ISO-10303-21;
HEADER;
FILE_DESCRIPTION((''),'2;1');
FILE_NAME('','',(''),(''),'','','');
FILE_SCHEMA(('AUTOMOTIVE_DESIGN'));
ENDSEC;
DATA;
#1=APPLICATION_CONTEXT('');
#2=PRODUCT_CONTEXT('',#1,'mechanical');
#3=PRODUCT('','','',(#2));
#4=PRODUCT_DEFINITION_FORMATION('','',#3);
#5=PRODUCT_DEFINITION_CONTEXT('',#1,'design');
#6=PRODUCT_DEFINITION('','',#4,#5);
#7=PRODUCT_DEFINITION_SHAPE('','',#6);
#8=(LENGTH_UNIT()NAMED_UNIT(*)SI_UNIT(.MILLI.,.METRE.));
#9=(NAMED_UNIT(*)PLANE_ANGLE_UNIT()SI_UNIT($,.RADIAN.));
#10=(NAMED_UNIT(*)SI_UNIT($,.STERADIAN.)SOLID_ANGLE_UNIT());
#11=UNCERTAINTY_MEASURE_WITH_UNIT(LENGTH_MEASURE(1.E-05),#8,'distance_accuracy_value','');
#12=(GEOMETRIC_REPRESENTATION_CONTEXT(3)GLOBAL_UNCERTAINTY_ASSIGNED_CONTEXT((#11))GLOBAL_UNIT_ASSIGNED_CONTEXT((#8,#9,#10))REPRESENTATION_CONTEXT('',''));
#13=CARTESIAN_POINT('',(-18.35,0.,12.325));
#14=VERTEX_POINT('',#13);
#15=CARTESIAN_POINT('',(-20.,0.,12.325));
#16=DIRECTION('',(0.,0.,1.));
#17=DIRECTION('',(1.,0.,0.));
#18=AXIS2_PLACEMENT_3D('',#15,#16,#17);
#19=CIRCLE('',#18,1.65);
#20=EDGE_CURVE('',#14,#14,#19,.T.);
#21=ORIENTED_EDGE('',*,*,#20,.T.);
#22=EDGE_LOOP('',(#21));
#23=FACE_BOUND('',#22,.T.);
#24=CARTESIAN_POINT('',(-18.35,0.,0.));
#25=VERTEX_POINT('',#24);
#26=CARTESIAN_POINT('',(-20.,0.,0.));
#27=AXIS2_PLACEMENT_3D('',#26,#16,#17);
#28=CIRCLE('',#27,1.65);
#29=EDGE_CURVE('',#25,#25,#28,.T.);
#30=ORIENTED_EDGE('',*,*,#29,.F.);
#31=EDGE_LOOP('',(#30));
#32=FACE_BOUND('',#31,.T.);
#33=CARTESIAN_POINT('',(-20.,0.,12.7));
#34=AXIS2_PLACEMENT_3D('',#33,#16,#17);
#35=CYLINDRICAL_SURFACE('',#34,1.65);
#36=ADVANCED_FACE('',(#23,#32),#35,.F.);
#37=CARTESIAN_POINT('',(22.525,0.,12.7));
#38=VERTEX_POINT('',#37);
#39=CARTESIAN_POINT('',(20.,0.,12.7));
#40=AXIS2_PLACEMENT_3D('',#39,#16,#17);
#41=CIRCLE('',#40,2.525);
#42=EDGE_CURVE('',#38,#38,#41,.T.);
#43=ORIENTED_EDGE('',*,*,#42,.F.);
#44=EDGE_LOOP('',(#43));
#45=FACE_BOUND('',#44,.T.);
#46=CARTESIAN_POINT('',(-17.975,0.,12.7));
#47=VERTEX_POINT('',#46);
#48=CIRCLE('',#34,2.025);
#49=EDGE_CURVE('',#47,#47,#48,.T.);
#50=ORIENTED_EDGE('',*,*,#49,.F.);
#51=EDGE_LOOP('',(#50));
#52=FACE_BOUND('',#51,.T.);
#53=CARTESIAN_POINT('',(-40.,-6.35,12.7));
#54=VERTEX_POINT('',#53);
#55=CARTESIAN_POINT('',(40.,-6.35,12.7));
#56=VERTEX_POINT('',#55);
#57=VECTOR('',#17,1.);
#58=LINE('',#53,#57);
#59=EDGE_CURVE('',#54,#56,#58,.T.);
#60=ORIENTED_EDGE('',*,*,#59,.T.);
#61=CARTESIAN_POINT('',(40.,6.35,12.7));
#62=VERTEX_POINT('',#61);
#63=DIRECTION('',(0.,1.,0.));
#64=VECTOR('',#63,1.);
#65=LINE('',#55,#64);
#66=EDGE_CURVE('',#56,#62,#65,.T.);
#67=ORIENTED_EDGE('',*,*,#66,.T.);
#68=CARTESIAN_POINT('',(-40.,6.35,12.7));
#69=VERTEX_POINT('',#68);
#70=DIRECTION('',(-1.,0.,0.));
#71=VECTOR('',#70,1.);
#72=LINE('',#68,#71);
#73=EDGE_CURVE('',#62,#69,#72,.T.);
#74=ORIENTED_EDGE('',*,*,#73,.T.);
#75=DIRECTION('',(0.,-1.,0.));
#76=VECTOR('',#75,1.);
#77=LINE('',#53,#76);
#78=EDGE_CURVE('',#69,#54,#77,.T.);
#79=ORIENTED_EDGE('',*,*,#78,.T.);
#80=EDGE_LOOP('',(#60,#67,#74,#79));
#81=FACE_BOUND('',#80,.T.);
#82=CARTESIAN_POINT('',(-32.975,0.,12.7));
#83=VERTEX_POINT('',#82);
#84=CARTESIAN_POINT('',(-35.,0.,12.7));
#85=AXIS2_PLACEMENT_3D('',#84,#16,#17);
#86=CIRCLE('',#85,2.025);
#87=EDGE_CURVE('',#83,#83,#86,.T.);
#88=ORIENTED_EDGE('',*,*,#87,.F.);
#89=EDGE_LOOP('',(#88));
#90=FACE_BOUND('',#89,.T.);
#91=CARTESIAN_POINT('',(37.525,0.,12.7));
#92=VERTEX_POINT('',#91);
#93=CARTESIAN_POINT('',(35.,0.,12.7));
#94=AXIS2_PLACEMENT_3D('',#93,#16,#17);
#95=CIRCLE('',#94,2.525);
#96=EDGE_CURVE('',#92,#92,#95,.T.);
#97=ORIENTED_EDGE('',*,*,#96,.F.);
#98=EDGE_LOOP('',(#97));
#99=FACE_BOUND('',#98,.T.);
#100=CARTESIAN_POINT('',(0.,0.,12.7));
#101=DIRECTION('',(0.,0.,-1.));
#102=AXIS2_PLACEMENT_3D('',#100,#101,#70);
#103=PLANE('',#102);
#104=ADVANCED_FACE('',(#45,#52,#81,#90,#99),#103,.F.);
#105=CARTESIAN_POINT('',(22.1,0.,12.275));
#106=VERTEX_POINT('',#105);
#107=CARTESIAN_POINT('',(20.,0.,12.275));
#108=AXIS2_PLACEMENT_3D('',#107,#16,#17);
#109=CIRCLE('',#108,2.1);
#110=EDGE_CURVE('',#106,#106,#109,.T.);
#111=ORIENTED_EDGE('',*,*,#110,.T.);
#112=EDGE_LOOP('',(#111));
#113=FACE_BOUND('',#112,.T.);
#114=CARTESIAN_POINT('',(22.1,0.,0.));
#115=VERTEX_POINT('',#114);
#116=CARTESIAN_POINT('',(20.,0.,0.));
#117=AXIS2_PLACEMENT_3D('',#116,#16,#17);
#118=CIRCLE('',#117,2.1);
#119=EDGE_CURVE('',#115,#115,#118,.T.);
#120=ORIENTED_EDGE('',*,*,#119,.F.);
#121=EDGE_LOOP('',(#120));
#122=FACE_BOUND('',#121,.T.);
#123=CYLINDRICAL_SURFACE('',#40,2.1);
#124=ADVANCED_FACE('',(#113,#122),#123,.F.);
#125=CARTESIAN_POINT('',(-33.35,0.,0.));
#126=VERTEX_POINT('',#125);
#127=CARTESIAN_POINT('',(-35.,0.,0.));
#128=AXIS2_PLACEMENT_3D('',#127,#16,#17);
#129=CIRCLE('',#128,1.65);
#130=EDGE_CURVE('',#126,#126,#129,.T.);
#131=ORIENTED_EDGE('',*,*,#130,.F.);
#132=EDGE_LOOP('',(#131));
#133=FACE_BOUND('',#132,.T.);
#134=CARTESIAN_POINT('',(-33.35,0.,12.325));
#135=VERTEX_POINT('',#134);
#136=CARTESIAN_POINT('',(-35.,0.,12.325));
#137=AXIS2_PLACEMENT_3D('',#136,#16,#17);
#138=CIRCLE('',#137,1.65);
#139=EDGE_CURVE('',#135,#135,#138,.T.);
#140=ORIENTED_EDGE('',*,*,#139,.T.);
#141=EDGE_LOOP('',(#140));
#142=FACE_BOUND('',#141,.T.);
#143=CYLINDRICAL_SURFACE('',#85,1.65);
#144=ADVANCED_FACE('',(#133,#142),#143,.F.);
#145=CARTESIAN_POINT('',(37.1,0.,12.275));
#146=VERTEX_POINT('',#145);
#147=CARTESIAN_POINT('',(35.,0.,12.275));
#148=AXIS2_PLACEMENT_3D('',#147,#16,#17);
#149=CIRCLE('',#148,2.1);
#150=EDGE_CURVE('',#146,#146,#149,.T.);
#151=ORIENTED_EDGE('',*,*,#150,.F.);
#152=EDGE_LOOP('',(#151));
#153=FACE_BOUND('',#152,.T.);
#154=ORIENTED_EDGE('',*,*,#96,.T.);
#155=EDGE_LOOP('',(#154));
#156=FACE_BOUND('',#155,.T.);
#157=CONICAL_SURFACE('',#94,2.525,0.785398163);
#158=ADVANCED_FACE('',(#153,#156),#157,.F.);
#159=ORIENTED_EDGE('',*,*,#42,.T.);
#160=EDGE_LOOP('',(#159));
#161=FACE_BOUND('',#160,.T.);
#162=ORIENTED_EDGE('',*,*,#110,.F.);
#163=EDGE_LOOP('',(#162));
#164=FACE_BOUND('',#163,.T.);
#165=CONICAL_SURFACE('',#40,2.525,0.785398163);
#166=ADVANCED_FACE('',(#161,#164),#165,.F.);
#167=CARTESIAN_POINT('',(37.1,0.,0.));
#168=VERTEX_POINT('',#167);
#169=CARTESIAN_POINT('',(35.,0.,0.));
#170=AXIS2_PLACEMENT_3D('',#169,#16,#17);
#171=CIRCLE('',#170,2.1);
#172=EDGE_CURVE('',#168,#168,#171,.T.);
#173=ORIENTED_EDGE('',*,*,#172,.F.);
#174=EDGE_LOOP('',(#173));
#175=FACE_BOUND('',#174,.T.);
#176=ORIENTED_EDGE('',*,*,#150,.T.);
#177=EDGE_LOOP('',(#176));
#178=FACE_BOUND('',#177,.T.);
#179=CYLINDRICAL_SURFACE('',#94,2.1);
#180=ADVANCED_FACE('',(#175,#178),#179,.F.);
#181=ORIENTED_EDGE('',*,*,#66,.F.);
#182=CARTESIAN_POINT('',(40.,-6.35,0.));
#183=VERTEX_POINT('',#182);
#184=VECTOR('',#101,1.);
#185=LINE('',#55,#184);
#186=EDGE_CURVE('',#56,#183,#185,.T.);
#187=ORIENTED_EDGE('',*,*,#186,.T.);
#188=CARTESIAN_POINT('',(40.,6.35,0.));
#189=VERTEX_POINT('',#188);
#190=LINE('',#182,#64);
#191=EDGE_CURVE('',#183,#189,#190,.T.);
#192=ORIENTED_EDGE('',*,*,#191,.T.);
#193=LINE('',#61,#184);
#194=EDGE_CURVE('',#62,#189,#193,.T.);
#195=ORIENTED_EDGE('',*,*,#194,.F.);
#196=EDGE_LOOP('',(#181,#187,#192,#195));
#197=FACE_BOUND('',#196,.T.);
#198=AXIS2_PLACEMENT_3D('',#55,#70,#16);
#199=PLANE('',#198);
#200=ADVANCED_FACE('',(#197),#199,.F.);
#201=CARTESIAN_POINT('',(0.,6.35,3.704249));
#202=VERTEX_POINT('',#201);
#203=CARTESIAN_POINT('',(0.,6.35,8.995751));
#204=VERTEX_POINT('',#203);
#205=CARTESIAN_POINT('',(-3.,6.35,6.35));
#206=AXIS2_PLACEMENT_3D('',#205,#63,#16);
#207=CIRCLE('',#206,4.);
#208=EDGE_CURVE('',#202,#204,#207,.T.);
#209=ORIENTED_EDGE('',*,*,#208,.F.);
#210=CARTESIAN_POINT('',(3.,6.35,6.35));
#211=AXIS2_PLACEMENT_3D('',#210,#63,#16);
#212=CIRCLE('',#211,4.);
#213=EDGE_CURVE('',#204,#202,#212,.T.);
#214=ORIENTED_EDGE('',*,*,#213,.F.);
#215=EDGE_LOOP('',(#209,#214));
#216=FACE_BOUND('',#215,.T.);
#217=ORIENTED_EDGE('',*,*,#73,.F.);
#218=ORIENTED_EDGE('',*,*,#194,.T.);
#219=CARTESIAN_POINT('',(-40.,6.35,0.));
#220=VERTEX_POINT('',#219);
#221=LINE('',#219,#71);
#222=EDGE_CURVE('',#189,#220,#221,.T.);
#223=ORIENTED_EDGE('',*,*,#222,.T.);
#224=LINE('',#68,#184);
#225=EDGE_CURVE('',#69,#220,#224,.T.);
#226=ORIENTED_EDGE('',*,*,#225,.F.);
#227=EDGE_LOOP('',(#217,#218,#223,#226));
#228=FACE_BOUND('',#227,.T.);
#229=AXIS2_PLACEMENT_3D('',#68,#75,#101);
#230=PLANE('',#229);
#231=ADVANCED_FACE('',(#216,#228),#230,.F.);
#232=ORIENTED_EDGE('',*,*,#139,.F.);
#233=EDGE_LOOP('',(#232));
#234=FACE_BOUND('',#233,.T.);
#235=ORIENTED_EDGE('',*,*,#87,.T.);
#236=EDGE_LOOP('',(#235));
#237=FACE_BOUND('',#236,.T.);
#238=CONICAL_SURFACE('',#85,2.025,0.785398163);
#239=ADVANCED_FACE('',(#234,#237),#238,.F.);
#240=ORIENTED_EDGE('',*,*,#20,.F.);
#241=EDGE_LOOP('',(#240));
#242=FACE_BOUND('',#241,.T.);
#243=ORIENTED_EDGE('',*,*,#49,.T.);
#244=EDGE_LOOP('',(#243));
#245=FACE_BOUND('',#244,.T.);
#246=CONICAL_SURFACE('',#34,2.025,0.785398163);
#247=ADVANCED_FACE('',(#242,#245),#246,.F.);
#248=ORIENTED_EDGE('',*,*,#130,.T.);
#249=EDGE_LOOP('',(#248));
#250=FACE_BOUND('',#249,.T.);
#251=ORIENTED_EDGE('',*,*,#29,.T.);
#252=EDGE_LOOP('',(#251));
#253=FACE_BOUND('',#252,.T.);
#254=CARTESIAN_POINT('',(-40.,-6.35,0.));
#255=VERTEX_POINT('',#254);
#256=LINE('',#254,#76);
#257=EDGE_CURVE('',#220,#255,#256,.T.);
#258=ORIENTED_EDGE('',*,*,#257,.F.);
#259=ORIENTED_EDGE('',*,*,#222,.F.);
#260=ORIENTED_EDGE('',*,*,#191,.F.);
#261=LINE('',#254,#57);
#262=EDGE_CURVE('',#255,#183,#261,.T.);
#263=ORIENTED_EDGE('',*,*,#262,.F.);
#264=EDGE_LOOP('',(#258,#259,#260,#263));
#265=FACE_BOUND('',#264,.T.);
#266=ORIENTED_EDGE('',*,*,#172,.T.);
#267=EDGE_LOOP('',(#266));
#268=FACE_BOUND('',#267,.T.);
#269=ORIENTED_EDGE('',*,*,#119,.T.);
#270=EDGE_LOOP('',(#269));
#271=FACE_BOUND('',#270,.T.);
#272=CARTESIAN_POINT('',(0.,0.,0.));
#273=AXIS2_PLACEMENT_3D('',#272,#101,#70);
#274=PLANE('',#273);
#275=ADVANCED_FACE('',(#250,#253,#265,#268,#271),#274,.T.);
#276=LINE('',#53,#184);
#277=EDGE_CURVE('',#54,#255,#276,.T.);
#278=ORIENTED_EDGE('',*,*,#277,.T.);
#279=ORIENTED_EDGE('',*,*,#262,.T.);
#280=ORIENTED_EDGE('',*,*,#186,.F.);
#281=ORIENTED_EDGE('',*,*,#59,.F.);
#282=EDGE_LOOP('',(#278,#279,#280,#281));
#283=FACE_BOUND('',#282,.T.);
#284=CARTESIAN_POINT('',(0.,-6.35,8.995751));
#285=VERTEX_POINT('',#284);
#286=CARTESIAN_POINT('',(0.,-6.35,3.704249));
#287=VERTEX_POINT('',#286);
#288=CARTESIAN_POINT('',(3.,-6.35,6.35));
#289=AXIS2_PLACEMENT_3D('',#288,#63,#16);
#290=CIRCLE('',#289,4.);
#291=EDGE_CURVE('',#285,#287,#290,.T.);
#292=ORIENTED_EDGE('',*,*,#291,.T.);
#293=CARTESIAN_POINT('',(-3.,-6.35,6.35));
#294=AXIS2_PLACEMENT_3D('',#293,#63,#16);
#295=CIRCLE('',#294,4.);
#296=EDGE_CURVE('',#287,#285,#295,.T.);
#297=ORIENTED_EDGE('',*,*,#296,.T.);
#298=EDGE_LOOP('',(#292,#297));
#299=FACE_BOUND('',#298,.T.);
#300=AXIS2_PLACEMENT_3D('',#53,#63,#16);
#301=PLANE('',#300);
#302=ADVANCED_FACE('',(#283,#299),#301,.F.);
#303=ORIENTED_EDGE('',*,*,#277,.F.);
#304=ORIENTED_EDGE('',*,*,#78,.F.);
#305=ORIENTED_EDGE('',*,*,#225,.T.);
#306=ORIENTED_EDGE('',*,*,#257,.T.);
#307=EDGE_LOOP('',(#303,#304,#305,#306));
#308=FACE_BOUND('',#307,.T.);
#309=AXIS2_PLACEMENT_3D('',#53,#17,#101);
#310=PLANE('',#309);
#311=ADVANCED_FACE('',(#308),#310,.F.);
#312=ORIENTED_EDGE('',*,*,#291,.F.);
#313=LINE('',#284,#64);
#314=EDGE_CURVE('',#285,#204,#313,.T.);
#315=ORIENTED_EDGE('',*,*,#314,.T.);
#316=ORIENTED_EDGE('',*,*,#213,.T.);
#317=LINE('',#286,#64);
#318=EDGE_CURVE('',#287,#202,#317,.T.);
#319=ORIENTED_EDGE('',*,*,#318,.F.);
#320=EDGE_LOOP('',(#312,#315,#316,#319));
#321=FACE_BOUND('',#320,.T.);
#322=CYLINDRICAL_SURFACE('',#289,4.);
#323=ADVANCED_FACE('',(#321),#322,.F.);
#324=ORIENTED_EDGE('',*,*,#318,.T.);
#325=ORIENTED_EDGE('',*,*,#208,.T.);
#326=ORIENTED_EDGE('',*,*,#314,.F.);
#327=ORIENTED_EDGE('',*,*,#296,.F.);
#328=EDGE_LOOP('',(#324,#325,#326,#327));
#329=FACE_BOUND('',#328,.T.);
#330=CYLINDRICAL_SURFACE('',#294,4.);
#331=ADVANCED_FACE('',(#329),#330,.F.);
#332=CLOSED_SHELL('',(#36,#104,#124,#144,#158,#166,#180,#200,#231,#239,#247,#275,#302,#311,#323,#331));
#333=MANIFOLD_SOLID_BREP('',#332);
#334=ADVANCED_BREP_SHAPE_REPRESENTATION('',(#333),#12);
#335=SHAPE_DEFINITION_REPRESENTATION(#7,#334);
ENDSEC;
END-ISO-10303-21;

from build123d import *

# Parameters (mm, degrees)
ESQUISSE1_W                 = 80
ESQUISSE1_H                 = 12.7
BOSS_EXTRU_1_DEPTH          = 12.7
TROU_TARAUD_M41_D           = 3.3
TROU_TARAUD_M41_CSINK_D     = 4.05
TROU_TARAUD_M41_CSINK_ANGLE = 90
ENL_V_START                 = -6.35
ENL_V_MAT_EXTRU_1_DEPTH     = 12.7


# Read off the part's stored shape, not the designer's step: Trou taraudé M51
with BuildPart() as part:
    # Esquisse1 → Boss.-Extru.1 (new body)
    with BuildSketch(Plane.XY):
        Rectangle(ESQUISSE1_W, ESQUISSE1_H)
    extrude(amount=BOSS_EXTRU_1_DEPTH)

    # Trou taraudé M41 (through all)
    with Locations(Plane.XY.offset(12.7)):
        with Locations((-35, 0), (-20, 0)):
            CounterSinkHole(TROU_TARAUD_M41_D / 2, TROU_TARAUD_M41_CSINK_D / 2, counter_sink_angle=TROU_TARAUD_M41_CSINK_ANGLE)

    # Esquisse4 → Enlèv. mat.-Extru.1 (cut)
    with BuildSketch(Plane(origin=(0, 0, 0), x_dir=(1, 0, 0), z_dir=(0, 1, 0)).offset(ENL_V_START)):
        with BuildLine():
            ThreePointArc((0, -3.704248689), (-7, -6.35), (0, -8.995751311))
            ThreePointArc((0, -8.995751311), (7, -6.35), (0, -3.704248689))
        make_face()
    extrude(amount=ENL_V_MAT_EXTRU_1_DEPTH, mode=Mode.SUBTRACT)

    # Trou taraudé M51 outline → Trou taraudé M51 (revolve, cut)
    with BuildSketch(Plane(origin=(35, 0, 0), x_dir=(1, 0, 0), z_dir=(0, -1, 0))):
        Polygon((0, 0), (2.1, 0), (2.1, 12.275), (2.525, 12.7), (0, 12.7), align=None)
    revolve(axis=Axis((35, 0, 0), (0, 0, 1)), mode=Mode.SUBTRACT)

    # Trou taraud_ M51 2 outline → Trou taraud_ M51 2 (revolve, cut)
    with BuildSketch(Plane(origin=(20, 0, 0), x_dir=(1, 0, 0), z_dir=(0, -1, 0))):
        Polygon((0, 0), (2.1, 0), (2.1, 12.275), (2.525, 12.7), (0, 12.7), align=None)
    revolve(axis=Axis((20, 0, 0), (0, 0, 1)), mode=Mode.SUBTRACT)


solid = part.part
